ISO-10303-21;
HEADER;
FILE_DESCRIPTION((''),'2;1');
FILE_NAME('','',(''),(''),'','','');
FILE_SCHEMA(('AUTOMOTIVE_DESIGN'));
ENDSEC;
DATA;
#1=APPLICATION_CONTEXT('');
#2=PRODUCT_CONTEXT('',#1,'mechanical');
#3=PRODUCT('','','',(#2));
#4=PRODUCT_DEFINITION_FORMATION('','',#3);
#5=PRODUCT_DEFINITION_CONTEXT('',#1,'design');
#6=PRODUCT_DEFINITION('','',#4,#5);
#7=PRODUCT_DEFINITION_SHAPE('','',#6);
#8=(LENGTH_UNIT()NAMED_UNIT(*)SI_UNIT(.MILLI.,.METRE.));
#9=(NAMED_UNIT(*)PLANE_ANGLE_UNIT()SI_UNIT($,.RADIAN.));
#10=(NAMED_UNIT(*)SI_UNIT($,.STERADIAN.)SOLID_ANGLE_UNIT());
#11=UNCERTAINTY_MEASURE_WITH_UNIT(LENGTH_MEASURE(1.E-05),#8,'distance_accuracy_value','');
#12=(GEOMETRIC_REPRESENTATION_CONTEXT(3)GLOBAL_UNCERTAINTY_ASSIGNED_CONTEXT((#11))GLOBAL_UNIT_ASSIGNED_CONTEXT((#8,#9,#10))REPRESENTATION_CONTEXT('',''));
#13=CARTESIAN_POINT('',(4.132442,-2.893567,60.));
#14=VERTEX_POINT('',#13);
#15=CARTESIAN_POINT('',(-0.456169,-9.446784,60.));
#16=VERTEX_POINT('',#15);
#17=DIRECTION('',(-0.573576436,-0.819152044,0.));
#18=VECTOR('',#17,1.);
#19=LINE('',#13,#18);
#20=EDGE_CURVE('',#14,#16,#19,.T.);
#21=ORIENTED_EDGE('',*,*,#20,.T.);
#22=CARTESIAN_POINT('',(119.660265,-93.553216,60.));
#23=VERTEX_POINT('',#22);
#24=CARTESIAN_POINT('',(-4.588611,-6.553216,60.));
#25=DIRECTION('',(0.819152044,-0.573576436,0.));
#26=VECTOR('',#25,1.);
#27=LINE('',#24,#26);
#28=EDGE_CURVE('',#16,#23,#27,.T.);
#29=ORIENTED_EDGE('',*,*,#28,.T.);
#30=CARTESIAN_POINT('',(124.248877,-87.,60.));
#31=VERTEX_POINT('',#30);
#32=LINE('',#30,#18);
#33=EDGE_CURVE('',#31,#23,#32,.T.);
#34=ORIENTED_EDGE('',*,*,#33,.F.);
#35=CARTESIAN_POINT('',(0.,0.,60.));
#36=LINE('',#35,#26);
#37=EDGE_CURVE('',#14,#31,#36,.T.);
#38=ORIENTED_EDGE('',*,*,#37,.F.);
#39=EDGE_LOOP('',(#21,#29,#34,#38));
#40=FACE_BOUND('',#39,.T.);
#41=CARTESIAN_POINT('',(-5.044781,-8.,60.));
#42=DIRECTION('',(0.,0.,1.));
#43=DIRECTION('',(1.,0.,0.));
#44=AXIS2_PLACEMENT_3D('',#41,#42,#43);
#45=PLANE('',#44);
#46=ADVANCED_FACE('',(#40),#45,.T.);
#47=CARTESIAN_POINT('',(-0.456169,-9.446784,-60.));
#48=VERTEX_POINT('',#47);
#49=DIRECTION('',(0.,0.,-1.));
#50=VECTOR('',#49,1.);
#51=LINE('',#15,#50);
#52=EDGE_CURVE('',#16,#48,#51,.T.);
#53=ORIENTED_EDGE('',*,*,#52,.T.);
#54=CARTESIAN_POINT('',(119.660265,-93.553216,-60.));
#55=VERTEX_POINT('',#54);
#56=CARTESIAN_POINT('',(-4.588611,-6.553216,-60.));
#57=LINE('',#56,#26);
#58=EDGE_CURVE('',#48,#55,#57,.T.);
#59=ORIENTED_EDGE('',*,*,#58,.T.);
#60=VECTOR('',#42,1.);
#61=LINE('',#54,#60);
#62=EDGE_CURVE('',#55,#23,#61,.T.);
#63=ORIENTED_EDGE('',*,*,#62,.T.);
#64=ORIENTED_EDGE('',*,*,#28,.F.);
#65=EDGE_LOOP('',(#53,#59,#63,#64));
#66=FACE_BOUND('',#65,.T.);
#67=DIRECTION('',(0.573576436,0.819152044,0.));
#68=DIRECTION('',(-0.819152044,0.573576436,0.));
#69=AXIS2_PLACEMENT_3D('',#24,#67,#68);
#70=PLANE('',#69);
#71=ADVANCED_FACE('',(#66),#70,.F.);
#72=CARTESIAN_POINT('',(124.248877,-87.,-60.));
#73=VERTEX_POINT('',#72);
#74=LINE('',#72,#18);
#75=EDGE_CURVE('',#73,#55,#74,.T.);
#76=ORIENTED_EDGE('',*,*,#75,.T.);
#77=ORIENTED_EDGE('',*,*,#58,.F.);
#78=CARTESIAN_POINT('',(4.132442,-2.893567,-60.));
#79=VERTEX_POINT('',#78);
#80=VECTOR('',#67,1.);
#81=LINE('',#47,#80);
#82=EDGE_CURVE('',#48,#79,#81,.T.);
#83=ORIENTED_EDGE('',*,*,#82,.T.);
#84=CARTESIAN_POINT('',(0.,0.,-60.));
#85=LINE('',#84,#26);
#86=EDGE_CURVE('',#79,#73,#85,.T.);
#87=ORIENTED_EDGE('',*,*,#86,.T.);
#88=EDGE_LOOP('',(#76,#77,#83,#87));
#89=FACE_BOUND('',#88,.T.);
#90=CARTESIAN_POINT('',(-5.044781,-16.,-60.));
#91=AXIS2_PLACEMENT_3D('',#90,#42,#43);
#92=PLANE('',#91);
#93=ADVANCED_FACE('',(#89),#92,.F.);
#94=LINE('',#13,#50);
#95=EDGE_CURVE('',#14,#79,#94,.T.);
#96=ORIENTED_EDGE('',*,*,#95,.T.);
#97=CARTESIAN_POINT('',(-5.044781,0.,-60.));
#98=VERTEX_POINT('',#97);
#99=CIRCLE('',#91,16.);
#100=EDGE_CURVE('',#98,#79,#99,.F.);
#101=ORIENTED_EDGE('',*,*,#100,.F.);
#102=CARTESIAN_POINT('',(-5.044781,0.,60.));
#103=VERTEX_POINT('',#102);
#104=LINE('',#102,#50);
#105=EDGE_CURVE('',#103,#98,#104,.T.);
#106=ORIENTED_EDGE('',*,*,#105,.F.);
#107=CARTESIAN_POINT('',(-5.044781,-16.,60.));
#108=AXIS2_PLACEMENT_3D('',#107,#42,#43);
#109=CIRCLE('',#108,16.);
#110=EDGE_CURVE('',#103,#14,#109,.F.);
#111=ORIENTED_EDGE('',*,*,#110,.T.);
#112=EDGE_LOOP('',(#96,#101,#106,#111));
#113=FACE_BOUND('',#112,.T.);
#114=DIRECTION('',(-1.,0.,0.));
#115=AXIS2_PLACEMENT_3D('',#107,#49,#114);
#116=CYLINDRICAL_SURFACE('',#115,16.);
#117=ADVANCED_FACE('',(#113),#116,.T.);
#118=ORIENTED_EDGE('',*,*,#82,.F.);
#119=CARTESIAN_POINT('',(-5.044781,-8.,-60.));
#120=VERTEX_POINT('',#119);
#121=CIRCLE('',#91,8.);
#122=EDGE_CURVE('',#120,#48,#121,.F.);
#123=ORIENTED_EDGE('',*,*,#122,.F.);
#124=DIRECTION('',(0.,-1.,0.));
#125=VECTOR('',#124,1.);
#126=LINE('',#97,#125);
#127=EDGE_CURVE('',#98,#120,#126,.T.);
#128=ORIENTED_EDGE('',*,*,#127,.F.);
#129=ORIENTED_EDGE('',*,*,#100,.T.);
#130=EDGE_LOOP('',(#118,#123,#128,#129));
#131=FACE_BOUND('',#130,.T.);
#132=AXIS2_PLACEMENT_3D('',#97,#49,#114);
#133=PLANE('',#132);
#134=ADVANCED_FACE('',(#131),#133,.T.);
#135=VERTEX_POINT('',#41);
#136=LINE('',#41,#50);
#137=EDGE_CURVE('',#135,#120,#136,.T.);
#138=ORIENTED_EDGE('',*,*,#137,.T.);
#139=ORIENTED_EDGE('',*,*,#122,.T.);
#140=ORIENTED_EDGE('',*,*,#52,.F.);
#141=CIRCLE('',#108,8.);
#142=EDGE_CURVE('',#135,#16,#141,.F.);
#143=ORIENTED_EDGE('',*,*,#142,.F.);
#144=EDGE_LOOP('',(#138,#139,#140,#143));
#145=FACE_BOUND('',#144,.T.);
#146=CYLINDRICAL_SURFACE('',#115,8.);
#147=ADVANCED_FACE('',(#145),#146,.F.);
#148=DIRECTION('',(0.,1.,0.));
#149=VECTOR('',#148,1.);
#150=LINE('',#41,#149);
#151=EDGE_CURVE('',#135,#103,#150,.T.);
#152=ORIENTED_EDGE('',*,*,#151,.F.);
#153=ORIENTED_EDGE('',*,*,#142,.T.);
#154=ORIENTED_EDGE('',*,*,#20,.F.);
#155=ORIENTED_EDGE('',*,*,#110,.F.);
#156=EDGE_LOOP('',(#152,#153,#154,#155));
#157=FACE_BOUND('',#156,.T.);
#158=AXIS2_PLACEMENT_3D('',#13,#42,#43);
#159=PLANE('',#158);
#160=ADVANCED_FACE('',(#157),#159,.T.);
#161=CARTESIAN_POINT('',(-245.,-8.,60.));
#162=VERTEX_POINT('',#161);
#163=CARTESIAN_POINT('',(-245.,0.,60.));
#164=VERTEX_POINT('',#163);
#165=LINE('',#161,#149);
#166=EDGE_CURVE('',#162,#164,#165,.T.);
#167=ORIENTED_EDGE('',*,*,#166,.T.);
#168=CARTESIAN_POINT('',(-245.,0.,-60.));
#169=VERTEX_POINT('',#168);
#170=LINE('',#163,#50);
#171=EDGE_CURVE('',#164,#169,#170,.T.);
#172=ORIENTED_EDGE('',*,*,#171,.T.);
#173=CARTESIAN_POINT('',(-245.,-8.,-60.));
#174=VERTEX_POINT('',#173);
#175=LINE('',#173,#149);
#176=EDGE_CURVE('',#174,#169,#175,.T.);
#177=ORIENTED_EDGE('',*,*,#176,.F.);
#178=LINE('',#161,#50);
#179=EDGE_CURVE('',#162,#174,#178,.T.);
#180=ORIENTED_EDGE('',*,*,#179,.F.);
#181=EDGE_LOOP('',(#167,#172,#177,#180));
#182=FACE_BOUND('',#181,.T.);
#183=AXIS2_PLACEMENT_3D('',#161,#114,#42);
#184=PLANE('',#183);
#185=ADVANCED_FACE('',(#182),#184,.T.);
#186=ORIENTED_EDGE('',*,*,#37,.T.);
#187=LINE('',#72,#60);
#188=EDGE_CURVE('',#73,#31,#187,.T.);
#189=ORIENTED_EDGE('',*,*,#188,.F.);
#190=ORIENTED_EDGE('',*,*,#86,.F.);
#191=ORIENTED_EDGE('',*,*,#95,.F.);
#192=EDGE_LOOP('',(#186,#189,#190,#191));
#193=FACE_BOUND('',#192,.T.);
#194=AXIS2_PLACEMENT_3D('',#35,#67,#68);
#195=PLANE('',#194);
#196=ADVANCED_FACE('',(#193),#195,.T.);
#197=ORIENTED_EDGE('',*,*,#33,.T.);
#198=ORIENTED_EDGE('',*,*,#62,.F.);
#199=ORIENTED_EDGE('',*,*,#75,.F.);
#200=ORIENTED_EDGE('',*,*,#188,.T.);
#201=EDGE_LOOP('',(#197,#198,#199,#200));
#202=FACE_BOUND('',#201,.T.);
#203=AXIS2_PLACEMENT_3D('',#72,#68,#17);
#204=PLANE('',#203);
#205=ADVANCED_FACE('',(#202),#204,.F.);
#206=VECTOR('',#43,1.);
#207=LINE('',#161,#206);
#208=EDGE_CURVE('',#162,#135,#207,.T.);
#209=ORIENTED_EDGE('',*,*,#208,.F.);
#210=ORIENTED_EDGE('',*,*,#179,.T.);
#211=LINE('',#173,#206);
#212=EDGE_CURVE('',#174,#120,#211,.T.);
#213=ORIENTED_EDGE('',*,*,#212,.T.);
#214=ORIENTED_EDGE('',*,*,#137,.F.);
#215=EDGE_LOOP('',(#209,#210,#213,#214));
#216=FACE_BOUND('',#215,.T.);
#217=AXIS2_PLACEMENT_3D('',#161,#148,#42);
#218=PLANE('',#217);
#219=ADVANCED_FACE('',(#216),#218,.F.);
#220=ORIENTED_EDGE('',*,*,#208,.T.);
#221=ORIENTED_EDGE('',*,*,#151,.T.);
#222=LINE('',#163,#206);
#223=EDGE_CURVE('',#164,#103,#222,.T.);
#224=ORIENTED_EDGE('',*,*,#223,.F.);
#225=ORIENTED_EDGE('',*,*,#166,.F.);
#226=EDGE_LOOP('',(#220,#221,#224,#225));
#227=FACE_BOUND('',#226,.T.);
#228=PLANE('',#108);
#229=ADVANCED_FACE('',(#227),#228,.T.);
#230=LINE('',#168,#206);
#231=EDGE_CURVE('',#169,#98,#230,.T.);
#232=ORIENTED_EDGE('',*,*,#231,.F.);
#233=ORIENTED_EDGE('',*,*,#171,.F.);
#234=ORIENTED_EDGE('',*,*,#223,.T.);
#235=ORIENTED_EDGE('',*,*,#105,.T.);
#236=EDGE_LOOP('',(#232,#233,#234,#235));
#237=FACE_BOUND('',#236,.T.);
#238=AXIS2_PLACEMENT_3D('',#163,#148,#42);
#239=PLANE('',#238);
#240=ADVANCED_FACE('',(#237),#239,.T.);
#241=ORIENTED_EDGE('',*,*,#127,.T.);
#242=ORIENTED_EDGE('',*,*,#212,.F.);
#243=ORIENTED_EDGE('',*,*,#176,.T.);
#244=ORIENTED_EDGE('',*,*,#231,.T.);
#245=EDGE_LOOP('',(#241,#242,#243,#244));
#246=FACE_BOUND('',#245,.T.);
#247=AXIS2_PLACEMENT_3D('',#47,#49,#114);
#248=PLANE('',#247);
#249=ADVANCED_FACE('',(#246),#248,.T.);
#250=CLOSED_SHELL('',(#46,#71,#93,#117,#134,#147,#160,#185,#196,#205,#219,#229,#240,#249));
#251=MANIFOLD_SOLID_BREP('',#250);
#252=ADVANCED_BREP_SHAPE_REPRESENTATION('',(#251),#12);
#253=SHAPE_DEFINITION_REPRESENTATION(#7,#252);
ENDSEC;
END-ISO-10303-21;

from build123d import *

# Parameters (mm, degrees)
SM_BASE_FLANGE_1_DEPTH = 60
CUT_EXTRUDE_1_DEPTH    = 306.076680355


# Sheet-metal steps are written as plain solids
with BuildPart() as part:
    # Sketch 1 → 基体-法兰1 (new, symmetric)
    with BuildSketch(Plane.XY):
        with BuildLine():
            Line((-245, 0), (-5.044780622, 0))
            ThreePointArc((-5.044780622, 0), (-0.23348783, -0.740528788), (4.13244236, -2.893567291))
            Line((4.13244236, -2.893567291), (185.659240876, -130))
            Line((185.659240876, -130), (181.070629386, -136.553216354))
            Line((181.070629386, -136.553216354), (-0.456169131, -9.446783646))
            ThreePointArc((-0.456169131, -9.446783646), (-2.639134226, -8.370264394), (-5.044780622, -8))
            Line((-5.044780622, -8), (-245, -8))
            Line((-245, -8), (-245, 0))
        make_face()
    extrude(amount=SM_BASE_FLANGE_1_DEPTH, both=True)

    # 草图6 → 切除-拉伸1 (cut, through all)
    with BuildSketch(Plane.XY.offset(60)):
        Polygon((124.248876587, -87), (119.660265096, -93.553216354), (181.070629386, -136.553216354), (185.659240876, -130), align=None)
    extrude(amount=-CUT_EXTRUDE_1_DEPTH, mode=Mode.SUBTRACT)


solid = part.part
